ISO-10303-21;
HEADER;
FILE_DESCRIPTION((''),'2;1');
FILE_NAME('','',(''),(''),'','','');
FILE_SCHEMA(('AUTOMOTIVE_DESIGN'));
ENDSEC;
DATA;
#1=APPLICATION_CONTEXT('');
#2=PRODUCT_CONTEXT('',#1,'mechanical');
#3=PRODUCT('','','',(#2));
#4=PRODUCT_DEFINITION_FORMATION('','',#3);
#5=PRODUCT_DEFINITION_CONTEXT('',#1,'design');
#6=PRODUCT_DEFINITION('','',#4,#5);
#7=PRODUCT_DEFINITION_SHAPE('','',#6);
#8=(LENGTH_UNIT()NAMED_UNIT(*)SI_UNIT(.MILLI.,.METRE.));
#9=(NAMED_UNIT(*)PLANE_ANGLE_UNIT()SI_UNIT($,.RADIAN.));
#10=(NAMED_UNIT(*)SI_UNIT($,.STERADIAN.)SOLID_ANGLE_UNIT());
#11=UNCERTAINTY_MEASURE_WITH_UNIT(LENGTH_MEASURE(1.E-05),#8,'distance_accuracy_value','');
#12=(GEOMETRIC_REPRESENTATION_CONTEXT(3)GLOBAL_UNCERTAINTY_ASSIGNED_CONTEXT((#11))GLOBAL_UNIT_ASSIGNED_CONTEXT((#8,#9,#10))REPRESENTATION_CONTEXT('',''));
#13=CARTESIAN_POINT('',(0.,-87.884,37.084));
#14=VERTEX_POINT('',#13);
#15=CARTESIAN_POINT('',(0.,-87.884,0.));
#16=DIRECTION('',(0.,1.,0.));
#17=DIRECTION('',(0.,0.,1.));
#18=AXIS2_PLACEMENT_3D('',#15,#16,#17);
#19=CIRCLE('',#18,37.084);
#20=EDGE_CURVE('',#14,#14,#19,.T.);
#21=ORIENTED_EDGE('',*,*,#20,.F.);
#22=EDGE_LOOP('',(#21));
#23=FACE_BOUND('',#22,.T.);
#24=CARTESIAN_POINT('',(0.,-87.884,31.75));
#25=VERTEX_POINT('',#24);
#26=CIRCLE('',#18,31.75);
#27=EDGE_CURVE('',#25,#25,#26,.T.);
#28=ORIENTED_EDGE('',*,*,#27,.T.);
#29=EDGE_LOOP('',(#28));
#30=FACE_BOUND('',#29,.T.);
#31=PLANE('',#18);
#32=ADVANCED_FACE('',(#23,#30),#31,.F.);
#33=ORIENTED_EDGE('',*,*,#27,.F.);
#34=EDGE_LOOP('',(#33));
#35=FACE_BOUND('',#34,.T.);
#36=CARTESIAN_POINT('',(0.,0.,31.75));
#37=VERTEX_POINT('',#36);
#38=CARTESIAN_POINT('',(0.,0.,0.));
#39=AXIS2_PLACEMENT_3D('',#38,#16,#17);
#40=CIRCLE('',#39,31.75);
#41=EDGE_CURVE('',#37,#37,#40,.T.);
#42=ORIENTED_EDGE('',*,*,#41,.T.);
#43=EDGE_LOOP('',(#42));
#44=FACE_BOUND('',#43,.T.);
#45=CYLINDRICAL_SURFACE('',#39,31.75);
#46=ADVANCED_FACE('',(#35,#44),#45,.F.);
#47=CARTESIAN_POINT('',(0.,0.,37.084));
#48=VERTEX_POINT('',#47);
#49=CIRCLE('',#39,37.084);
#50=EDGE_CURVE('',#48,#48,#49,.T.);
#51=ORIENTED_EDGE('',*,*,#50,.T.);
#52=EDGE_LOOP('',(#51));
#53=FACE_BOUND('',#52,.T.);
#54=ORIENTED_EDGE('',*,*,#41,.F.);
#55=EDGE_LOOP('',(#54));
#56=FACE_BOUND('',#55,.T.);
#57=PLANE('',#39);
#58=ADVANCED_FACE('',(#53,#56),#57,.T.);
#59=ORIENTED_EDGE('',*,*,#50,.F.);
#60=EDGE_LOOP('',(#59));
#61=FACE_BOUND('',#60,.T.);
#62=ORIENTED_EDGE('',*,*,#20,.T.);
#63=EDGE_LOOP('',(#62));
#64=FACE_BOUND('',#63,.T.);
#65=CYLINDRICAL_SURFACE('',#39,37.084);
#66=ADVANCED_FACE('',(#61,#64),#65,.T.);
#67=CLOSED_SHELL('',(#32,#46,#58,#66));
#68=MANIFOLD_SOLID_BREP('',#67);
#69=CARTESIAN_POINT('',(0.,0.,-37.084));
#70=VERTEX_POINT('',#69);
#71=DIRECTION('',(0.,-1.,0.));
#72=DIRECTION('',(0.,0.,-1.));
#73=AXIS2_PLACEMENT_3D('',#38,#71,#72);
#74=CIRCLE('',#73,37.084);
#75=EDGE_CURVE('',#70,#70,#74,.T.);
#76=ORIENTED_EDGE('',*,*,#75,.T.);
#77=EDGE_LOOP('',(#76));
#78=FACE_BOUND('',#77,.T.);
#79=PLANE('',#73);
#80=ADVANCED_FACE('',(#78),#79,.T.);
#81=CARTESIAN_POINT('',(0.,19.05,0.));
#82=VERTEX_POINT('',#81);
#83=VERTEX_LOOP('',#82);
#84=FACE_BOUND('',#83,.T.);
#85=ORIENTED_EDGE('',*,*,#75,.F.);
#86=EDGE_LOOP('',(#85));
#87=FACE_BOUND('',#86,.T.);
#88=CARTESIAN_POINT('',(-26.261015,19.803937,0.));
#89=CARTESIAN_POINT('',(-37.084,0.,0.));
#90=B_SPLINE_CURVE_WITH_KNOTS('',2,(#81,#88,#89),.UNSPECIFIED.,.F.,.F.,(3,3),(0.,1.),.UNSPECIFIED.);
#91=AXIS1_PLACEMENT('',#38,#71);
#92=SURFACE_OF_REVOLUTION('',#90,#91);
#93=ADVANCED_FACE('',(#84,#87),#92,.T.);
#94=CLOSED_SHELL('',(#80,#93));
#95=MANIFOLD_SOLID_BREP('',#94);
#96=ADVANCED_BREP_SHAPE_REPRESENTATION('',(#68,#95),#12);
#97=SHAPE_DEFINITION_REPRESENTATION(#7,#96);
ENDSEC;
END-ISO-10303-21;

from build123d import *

# Parameters (mm, degrees)
SKETCH1_3_W = 5.334
SKETCH1_3_H = 87.884


with BuildPart() as part:
    # Sketch1 → Revolve1 (revolve)
    with BuildSketch(Plane.XY):
        with BuildLine():
            Line((-31.75, 0), (0, 0))
            Line((0, 0), (0, 19.05))
            add(Edge.make_bspline(
                [(0, 19.05), (-26.26101489, 19.803937268), (-37.084, 0)],
                knots=[0, 0, 0, 1, 1, 1], degree=2))
            Line((-37.084, 0), (-31.75, 0))
        make_face()
    revolve(axis=Axis((0, 0, 0), (0, 1, 0)))


with BuildPart() as body_2:
    # Sketch1<3> → Revolve2 (revolve)
    with BuildSketch(Plane.XY):
        with Locations((-34.417, -43.942)):
            Rectangle(SKETCH1_3_W, SKETCH1_3_H)
    revolve(axis=Axis((0, 0, 0), (0, -1, 0)))


solid = Compound([part.part, body_2.part])
